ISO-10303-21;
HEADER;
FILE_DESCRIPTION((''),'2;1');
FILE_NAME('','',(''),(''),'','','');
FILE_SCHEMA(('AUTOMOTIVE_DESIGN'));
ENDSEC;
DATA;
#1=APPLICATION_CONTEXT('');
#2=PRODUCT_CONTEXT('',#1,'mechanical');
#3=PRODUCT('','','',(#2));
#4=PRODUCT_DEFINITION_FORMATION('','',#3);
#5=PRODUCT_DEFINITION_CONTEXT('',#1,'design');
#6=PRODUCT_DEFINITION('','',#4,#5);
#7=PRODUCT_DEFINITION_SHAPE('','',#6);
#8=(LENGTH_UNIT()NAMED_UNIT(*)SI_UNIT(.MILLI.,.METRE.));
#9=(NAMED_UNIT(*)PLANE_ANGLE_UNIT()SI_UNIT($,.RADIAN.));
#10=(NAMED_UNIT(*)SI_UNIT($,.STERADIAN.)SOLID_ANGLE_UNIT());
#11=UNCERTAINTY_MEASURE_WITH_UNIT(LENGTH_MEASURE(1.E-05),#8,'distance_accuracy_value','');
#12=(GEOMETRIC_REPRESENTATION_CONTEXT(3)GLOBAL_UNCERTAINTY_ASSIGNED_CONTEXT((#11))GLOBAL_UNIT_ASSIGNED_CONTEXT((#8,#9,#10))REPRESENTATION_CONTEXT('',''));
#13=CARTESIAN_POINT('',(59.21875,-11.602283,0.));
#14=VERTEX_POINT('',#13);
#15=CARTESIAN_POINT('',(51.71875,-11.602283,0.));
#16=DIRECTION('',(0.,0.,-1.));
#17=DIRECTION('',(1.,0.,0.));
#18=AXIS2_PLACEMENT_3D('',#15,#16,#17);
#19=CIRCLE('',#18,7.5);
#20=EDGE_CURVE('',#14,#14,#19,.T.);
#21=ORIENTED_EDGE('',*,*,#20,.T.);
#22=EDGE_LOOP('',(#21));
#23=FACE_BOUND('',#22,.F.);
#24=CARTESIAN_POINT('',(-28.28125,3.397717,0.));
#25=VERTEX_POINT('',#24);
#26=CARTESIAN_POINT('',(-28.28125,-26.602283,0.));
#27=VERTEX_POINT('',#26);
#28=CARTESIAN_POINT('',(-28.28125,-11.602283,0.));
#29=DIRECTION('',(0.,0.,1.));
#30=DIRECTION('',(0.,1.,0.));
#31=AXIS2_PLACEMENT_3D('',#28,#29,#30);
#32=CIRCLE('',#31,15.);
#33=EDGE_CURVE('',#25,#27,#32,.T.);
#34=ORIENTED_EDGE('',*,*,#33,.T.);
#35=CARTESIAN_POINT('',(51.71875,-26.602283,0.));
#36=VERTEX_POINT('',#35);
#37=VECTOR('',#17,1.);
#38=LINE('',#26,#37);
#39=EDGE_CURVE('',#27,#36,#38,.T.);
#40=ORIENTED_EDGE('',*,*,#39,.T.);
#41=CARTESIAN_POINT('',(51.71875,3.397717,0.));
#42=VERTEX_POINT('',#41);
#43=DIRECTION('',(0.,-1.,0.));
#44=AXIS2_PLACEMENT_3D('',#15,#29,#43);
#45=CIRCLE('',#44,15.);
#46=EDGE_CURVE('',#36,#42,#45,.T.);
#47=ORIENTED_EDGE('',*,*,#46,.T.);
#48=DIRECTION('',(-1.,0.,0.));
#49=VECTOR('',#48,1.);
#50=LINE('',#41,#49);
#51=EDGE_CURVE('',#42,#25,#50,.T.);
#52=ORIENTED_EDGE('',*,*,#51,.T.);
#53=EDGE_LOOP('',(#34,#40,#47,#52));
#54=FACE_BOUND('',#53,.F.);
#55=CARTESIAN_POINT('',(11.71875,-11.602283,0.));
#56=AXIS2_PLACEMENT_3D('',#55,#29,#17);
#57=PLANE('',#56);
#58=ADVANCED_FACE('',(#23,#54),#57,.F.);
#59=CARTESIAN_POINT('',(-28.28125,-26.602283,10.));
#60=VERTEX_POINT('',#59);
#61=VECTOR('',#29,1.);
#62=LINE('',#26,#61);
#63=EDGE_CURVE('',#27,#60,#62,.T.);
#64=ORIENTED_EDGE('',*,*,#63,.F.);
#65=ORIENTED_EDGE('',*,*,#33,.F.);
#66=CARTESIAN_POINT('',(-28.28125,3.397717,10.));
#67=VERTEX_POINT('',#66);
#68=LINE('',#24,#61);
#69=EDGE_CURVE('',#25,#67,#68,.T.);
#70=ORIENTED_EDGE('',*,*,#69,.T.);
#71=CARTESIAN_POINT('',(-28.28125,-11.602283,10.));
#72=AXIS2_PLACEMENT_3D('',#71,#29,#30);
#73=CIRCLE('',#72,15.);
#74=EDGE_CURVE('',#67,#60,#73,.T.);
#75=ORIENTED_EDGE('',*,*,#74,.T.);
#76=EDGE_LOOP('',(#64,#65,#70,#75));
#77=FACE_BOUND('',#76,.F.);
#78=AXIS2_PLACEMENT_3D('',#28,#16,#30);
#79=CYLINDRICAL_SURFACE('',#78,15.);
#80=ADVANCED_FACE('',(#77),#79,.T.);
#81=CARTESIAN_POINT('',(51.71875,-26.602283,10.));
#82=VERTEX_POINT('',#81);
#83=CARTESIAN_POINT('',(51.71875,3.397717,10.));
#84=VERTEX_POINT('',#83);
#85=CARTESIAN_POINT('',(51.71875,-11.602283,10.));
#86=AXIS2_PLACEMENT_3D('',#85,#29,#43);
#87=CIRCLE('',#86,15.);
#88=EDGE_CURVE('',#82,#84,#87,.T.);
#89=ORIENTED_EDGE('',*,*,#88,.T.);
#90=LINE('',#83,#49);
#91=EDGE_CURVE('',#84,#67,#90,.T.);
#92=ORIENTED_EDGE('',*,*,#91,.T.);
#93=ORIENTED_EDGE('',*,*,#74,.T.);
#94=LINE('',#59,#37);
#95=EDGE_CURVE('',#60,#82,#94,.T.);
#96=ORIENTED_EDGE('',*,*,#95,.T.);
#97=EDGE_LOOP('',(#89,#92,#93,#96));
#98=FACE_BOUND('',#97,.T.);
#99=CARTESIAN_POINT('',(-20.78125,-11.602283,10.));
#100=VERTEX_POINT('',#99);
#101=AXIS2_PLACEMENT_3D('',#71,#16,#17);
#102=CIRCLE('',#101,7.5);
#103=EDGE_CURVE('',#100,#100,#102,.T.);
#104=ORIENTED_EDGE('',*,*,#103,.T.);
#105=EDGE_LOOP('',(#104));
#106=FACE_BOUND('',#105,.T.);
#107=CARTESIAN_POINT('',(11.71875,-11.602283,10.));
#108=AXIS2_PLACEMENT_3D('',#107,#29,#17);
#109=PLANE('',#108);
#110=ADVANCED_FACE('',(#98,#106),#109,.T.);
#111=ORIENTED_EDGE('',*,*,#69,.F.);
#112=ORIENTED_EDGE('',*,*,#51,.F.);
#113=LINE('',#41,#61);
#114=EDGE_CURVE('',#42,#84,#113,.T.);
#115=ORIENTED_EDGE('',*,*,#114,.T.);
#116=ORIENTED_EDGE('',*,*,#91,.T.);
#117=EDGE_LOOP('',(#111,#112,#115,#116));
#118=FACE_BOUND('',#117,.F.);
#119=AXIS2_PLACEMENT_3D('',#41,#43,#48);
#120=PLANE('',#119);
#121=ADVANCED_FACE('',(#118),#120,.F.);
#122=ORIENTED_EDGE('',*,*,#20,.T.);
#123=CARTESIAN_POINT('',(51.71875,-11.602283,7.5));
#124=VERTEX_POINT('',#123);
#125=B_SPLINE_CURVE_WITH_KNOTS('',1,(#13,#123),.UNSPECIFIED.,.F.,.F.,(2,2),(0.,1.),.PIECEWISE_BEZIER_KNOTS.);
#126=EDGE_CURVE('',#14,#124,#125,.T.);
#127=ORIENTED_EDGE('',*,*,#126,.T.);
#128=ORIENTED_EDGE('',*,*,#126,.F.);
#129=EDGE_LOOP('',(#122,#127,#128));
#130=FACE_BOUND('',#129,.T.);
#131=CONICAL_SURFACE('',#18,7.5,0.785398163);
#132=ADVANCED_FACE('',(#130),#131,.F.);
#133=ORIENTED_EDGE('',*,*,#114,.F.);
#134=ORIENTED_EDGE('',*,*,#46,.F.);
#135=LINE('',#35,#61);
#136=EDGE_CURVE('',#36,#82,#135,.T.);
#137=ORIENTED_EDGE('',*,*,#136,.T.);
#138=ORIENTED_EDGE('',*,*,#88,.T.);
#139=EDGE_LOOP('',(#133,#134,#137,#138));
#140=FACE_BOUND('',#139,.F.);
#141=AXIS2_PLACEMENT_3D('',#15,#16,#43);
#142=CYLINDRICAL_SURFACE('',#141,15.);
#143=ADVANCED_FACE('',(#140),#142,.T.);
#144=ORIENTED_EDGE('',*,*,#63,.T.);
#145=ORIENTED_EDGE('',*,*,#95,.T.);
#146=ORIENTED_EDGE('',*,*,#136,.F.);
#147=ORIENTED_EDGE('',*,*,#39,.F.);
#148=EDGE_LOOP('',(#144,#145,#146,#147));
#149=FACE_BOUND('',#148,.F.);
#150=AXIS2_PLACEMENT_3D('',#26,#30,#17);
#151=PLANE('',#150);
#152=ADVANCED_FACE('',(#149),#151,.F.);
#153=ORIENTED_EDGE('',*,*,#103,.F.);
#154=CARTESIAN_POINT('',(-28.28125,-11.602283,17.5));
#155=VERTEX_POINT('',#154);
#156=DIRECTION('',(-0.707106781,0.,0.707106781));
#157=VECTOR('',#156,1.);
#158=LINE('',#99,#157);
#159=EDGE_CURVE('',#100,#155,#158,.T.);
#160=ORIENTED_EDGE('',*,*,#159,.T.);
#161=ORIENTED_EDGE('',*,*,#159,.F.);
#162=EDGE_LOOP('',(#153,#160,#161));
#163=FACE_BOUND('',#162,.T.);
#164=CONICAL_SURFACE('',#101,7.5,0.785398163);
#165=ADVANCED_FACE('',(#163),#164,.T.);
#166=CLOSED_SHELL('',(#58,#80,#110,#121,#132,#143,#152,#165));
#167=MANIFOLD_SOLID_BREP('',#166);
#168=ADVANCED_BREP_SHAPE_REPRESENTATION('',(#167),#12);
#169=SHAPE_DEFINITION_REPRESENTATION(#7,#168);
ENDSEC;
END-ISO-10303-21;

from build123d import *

# Parameters (mm, degrees)
F1_DEPTH = 10
F2_R     = 7.5
F3_DEPTH = 7.5
F3_TAPER = 45
F4_R     = 7.5


# Not quite as in the source:
# - an extrude whose draft closes it to a point is written as a loft to that point


with BuildPart() as f1:
    # F0 (on Top) → F1 (new body)
    with BuildSketch(Plane.XY):
        with BuildLine():
            Line((51.71875, 3.3977172854), (-28.28125, 3.3977172854))
            ThreePointArc((-28.28125, 3.3977172854), (-43.28125, -11.6022827146), (-28.28125, -26.6022827146))
            Line((-28.28125, -26.6022827146), (51.71875, -26.6022827146))
            ThreePointArc((51.71875, -26.6022827146), (66.71875, -11.6022827146), (51.71875, 3.3977172854))
        make_face()
    extrude(amount=F1_DEPTH)

    # F2 (on face) → F3 (join)
    with BuildSketch(Plane.XY.offset(10)):
        with Locations((-28.28125, -11.6022827146)):
            Circle(F2_R)
    extrude(amount=F3_DEPTH, taper=F3_TAPER)

    # F4 (on face) → F5 section 0
    with BuildSketch(Plane(origin=(0, 0, 0), x_dir=(1, 0, 0), z_dir=(0, 0, -1)), mode=Mode.PRIVATE) as f5_s0:
        with Locations((51.71875, 11.6022827146)):
            Circle(F4_R)
    loft([f5_s0.sketch, Vertex(51.71875, -11.6022827146, 7.5)], ruled=True, mode=Mode.SUBTRACT)


solid = f1.part
